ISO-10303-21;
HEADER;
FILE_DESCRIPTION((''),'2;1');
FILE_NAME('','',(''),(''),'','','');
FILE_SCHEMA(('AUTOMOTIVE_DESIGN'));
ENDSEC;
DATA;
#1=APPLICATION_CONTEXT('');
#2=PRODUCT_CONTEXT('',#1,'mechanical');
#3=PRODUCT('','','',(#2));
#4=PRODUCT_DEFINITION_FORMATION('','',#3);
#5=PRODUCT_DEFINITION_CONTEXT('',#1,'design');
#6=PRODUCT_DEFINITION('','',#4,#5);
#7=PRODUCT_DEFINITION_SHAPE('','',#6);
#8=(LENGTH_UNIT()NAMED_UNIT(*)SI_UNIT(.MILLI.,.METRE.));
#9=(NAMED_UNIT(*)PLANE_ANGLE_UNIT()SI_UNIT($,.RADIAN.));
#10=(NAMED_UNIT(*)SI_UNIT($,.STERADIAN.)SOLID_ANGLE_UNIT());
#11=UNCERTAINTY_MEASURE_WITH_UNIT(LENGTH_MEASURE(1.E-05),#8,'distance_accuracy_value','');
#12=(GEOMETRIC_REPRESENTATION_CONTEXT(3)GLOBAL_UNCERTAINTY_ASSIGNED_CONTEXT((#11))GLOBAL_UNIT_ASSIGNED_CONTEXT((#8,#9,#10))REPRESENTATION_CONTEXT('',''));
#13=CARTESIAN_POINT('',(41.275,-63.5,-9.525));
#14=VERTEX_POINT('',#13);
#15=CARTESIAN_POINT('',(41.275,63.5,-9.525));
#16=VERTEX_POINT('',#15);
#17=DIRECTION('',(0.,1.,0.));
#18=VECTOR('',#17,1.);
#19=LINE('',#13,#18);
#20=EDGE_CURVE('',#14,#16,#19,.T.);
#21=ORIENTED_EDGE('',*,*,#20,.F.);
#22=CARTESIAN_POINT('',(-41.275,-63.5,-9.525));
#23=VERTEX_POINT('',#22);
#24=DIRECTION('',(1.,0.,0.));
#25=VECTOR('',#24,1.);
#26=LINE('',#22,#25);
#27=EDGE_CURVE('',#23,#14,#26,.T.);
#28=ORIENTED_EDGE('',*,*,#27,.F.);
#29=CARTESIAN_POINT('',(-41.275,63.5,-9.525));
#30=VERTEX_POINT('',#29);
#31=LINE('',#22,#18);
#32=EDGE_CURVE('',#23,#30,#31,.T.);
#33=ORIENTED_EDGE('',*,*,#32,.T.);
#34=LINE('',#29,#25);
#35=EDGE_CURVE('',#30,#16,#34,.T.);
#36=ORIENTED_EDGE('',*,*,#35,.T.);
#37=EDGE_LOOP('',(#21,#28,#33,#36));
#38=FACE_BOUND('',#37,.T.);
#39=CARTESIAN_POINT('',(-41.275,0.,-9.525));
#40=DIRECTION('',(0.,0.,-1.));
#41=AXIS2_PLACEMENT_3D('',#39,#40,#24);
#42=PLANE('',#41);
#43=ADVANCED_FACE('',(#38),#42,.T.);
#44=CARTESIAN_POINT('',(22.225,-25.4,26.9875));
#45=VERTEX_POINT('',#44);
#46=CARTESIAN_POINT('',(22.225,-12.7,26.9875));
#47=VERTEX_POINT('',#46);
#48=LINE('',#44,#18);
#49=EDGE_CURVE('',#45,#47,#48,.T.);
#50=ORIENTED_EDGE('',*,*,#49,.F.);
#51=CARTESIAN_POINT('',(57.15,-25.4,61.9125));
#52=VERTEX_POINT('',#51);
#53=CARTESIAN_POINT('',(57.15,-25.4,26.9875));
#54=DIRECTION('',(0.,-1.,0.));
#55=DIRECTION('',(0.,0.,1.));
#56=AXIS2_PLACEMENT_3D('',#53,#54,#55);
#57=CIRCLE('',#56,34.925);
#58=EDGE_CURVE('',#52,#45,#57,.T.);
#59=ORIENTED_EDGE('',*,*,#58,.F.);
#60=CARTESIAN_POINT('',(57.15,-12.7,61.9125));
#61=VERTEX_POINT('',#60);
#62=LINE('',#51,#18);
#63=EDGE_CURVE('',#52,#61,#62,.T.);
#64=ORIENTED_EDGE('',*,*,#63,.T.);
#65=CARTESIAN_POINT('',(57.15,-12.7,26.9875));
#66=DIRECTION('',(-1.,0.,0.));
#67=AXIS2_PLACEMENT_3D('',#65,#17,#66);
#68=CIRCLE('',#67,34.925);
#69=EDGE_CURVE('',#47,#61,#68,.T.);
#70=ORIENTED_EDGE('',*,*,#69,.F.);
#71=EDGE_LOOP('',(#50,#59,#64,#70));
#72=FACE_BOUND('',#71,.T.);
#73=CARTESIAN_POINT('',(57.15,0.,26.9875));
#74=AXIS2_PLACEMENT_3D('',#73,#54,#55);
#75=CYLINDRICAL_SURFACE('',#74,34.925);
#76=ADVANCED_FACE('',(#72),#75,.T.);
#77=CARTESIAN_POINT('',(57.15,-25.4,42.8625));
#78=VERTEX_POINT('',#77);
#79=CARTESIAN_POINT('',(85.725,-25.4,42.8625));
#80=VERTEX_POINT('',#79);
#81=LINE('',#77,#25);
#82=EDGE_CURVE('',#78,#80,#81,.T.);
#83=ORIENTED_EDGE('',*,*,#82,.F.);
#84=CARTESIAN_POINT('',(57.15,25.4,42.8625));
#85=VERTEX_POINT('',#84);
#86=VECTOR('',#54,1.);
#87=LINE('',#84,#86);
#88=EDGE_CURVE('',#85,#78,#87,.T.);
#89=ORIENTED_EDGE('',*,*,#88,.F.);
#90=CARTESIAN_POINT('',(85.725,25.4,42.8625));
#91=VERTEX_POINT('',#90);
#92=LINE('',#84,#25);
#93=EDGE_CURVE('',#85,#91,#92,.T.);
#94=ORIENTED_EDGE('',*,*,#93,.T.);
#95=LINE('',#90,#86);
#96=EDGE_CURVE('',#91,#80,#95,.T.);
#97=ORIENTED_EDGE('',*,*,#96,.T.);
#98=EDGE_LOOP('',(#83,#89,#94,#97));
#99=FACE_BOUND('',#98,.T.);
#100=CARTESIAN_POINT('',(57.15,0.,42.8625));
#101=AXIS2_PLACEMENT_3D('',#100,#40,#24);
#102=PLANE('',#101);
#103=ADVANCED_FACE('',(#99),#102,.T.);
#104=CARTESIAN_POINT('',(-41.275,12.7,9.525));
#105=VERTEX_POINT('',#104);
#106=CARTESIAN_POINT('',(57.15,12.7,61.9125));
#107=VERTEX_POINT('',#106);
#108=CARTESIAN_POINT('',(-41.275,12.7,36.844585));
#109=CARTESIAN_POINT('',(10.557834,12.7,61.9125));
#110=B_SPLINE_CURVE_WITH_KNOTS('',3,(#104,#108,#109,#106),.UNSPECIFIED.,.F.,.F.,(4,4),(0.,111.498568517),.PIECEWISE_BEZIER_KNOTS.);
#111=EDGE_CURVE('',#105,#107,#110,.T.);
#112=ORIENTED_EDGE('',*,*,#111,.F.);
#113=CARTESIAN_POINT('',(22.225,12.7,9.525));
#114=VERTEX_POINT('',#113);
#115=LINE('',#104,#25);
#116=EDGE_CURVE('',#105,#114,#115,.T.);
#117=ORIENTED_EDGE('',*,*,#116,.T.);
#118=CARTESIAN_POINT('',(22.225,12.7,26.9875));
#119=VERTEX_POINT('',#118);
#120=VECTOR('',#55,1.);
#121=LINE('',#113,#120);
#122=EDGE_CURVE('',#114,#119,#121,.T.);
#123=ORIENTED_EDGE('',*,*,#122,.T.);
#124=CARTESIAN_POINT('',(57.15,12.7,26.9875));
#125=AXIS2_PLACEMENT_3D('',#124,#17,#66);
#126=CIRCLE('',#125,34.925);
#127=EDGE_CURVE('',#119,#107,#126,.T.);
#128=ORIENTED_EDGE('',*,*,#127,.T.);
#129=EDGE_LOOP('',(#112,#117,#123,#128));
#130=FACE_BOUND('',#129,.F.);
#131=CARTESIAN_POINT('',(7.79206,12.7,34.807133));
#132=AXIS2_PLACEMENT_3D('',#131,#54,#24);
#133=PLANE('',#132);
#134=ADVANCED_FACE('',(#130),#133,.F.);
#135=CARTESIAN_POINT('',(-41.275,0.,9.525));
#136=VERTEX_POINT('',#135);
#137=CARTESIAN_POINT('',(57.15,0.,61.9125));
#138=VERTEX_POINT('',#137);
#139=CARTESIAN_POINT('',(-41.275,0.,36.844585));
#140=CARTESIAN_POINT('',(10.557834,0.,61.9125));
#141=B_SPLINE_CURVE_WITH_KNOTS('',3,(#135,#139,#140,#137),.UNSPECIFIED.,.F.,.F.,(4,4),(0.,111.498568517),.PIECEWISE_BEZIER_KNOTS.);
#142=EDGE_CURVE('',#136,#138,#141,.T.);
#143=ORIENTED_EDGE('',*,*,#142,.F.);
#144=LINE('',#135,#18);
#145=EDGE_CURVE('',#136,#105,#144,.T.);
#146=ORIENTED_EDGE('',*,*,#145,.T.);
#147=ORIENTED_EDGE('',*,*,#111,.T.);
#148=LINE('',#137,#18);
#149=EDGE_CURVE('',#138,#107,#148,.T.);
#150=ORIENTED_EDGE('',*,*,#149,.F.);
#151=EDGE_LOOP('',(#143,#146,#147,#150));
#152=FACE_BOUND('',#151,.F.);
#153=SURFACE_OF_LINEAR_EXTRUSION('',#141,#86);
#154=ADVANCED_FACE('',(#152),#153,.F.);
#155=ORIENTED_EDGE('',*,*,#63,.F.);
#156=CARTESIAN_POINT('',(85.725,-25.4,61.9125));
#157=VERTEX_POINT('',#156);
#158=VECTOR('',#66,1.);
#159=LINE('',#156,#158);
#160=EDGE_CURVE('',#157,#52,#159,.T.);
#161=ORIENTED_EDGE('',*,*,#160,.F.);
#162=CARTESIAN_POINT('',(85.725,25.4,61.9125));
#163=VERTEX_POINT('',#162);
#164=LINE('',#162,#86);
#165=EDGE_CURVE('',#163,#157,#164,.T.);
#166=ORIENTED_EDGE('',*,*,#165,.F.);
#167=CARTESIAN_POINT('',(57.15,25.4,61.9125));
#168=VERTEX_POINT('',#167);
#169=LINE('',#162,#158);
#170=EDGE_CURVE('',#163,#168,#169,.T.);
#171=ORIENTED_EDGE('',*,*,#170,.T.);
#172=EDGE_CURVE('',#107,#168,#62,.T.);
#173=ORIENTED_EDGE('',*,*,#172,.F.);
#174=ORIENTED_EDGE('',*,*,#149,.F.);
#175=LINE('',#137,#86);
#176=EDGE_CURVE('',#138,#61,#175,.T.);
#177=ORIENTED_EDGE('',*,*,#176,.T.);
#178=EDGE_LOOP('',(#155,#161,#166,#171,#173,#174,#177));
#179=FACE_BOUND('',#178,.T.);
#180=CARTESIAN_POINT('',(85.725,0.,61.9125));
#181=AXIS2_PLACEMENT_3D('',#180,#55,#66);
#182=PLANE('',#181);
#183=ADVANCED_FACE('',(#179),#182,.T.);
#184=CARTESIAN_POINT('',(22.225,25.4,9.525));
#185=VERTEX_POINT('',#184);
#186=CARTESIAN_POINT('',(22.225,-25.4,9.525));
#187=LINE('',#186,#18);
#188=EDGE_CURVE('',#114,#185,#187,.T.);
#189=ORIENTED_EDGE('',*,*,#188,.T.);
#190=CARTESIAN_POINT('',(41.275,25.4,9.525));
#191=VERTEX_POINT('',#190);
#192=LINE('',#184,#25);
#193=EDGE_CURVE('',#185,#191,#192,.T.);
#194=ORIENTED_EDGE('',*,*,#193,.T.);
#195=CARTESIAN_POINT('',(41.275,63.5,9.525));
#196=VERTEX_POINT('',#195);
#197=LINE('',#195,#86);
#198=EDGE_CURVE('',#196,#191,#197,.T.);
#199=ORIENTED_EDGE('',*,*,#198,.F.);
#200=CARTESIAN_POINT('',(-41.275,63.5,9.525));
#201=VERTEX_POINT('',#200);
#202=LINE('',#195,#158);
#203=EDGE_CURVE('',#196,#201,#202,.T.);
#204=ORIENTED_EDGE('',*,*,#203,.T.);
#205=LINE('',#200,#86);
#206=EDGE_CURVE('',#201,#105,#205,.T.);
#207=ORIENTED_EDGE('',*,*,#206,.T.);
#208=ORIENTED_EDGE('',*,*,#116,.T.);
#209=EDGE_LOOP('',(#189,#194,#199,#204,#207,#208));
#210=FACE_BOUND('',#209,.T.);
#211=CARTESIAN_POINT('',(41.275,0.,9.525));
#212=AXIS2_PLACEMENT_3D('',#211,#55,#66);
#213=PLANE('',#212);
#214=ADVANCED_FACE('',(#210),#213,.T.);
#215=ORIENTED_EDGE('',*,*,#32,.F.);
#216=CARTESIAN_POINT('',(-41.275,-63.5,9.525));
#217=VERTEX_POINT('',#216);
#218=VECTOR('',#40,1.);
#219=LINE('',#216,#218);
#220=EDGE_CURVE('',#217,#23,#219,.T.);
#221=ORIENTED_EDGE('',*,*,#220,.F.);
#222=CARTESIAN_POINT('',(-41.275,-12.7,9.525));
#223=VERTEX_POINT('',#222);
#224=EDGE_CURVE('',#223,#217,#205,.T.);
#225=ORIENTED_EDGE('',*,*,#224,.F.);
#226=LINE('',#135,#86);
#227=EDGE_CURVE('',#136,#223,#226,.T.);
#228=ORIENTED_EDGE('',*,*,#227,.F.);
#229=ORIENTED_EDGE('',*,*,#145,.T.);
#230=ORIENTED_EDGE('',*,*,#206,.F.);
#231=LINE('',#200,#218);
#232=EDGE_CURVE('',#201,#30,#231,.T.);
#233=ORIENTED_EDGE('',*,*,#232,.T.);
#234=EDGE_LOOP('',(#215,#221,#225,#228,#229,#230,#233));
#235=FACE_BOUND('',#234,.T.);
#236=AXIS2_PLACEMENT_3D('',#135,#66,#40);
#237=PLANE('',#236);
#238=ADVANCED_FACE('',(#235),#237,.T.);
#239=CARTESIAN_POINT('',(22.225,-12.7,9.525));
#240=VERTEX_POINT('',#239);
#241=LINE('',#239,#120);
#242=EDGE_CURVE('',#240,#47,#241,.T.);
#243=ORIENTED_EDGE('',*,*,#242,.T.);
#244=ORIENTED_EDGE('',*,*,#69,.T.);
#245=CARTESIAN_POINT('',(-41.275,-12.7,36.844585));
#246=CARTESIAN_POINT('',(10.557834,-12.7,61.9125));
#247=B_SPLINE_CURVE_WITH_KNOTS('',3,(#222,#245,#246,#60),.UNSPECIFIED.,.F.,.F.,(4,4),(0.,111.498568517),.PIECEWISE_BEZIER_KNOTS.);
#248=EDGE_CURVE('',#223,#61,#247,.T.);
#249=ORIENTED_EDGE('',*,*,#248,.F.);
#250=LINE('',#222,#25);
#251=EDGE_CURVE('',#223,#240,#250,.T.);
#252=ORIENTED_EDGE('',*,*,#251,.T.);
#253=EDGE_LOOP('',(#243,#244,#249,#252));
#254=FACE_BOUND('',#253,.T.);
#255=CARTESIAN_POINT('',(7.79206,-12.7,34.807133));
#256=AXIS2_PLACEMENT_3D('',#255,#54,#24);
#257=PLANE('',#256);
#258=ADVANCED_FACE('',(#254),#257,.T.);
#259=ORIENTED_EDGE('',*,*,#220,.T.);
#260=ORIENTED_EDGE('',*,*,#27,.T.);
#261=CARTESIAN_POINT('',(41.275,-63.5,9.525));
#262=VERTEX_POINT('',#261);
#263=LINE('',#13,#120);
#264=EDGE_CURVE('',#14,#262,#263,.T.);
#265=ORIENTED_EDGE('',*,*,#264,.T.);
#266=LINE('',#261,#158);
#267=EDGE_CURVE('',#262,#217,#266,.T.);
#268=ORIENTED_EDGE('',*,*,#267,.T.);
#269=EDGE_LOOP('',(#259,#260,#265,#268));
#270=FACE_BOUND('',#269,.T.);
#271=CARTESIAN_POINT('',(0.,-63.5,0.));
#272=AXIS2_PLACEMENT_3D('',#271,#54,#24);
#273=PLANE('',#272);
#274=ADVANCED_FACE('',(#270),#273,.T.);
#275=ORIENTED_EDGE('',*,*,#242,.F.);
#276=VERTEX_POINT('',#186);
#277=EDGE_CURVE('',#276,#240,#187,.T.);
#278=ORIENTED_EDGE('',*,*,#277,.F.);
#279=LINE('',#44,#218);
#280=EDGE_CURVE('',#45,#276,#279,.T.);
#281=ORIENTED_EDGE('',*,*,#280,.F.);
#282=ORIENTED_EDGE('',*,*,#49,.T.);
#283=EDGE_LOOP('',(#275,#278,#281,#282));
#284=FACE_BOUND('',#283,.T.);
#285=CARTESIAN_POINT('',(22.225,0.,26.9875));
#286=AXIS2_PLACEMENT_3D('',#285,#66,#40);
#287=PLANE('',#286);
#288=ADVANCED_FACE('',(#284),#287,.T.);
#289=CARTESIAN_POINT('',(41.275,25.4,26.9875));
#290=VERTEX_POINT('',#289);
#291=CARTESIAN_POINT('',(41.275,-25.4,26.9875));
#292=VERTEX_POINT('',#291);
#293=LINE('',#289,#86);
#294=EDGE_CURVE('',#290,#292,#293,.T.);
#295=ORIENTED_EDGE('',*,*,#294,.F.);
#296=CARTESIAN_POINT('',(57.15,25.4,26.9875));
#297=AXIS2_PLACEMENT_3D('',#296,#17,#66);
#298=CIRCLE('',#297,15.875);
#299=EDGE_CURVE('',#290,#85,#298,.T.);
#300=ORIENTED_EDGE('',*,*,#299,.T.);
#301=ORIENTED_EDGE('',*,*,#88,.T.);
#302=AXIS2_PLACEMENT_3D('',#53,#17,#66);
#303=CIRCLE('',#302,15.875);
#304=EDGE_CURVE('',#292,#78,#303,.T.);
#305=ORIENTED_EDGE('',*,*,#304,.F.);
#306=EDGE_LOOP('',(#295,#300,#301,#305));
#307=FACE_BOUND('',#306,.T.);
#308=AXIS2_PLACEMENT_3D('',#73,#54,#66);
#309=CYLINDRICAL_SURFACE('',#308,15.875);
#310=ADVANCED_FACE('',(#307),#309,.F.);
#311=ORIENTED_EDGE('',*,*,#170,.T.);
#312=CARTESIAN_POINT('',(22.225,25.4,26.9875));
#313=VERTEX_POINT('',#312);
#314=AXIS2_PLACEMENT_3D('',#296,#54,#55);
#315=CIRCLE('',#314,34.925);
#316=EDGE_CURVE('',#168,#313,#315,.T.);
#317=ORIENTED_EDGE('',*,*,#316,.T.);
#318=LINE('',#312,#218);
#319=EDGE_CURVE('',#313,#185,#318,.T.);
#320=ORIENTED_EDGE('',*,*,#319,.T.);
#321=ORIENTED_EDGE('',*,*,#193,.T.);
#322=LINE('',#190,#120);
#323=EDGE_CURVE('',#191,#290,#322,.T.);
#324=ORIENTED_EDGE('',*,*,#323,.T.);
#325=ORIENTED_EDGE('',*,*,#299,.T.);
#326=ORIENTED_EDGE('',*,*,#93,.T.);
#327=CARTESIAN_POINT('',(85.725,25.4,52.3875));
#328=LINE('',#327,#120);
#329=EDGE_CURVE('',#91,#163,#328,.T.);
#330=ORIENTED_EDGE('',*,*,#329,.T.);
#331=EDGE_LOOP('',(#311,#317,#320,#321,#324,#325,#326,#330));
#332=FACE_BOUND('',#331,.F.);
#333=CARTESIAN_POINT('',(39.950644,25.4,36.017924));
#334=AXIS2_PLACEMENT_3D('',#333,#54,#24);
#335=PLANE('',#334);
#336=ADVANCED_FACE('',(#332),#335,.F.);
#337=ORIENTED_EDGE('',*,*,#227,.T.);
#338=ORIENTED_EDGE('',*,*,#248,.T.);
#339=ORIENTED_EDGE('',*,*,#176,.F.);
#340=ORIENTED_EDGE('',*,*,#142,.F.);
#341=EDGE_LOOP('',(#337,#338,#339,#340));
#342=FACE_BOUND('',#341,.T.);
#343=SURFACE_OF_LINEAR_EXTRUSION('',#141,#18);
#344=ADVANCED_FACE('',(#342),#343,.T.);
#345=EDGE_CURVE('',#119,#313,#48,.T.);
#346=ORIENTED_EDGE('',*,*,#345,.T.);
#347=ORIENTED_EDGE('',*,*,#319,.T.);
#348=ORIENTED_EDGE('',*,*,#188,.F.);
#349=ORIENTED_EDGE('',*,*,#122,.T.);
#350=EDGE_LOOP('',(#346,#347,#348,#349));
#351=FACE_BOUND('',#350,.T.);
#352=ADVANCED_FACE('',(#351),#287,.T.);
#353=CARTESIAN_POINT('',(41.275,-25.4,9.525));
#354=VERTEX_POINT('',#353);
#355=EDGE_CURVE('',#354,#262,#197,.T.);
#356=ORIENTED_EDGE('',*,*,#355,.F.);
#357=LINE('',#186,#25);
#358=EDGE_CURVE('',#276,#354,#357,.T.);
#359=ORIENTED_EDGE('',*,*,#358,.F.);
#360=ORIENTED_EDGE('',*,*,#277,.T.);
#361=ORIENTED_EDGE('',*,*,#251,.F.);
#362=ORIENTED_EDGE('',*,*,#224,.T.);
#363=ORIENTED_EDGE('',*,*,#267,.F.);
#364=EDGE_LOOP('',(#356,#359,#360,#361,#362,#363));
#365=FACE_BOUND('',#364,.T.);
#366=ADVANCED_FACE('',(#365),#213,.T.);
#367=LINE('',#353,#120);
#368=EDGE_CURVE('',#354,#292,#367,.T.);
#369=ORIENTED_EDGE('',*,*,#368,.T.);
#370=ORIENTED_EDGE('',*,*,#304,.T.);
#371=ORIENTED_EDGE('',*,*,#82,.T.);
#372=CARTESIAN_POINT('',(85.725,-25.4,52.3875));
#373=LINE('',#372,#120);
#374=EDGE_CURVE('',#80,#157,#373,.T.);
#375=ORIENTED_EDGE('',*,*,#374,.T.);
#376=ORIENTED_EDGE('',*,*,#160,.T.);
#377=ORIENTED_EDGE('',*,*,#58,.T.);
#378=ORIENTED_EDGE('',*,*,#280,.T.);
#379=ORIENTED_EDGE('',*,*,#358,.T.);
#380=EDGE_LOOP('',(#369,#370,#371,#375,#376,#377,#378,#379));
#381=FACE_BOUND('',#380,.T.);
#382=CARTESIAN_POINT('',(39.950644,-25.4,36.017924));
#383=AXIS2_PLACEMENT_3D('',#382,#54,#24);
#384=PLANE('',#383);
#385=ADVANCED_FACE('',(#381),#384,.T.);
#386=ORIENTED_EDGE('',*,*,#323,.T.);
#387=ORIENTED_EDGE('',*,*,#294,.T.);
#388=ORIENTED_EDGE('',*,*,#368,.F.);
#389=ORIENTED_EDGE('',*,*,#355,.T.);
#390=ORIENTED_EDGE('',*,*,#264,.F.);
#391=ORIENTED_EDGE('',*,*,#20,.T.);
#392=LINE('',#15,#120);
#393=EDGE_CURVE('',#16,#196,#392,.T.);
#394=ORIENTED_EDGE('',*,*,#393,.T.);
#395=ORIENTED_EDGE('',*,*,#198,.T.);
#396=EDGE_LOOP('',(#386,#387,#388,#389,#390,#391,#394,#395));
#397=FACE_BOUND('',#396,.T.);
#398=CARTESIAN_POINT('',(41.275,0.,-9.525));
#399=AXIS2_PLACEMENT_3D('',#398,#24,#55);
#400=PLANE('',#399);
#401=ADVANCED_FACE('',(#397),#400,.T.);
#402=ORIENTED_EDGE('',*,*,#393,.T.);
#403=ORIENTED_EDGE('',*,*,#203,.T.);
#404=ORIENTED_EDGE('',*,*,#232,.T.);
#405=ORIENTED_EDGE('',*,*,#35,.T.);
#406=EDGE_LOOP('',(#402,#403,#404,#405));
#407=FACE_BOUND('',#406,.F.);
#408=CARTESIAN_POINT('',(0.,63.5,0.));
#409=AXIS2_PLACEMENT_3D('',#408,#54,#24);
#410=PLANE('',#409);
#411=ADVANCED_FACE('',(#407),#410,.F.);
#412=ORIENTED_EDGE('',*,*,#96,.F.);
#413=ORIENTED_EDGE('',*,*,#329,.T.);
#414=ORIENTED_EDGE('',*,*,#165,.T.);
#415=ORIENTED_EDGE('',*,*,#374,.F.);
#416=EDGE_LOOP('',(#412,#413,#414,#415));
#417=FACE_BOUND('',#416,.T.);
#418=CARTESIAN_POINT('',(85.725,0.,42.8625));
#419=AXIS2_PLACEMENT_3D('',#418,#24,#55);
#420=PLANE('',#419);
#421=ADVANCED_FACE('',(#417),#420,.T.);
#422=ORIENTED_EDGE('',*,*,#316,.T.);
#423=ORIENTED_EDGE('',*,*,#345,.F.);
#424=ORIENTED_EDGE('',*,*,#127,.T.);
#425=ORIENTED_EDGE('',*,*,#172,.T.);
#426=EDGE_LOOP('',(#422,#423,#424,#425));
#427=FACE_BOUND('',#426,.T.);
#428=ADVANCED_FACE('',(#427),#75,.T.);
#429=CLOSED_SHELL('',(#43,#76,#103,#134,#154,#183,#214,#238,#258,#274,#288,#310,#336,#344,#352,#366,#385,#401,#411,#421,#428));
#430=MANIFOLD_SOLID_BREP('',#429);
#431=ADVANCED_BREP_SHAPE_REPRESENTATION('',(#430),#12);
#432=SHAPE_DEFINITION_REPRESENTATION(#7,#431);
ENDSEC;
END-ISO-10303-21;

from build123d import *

# Parameters (mm, degrees)
F1_DEPTH = 63.5
F0_W     = 25.4
F0_H     = 19.05
F2_DEPTH = 25.4
F3_DEPTH = 12.7


with BuildPart() as f1:
    # F0 (on Front) → F1 (new body, symmetric)
    with BuildSketch(Plane.XZ):
        Polygon((41.275, -9.525), (41.275, 9.525), (22.225, 9.525), (-41.275, 9.525), (-41.275, -9.525), align=None)
    extrude(amount=F1_DEPTH, both=True)

    # F0 (on Front) → F2 (join, symmetric)
    with BuildSketch(Plane.XZ):
        with BuildLine():
            Line((22.225, 9.525), (41.275, 9.525))
            Line((41.275, 9.525), (41.275, 26.9875))
            ThreePointArc((41.275, 26.9875), (45.9246798487, 38.2128201513), (57.15, 42.8625))
            Line((57.15, 42.8625), (60.325, 42.8625))
            Line((60.325, 42.8625), (60.325, 61.9125))
            Line((60.325, 61.9125), (57.15, 61.9125))
            ThreePointArc((57.15, 61.9125), (32.4542956671, 51.6832043329), (22.225, 26.9875))
            Line((22.225, 26.9875), (22.225, 9.525))
        make_face()
        with Locations((73.025, 52.3875)):
            Rectangle(F0_W, F0_H)
    extrude(amount=F2_DEPTH, both=True)

    # F0 (on Front) → F3 (join, symmetric)
    with BuildSketch(Plane.XZ):
        with BuildLine():
            Line((-41.275, 9.525), (22.225, 9.525))
            Line((22.225, 9.525), (22.225, 26.9875))
            ThreePointArc((22.225, 26.9875), (32.4542956671, 51.6832043329), (57.15, 61.9125))
            add(Edge.make_bspline(
                [(-41.275, 9.525), (-41.275, 36.84458516), (10.5578337313, 61.9125), (57.15, 61.9125)],
                knots=[0, 0, 0, 0, 111.4985685166, 111.4985685166, 111.4985685166, 111.4985685166], degree=3))
        make_face()
    extrude(amount=F3_DEPTH, both=True)


solid = f1.part
